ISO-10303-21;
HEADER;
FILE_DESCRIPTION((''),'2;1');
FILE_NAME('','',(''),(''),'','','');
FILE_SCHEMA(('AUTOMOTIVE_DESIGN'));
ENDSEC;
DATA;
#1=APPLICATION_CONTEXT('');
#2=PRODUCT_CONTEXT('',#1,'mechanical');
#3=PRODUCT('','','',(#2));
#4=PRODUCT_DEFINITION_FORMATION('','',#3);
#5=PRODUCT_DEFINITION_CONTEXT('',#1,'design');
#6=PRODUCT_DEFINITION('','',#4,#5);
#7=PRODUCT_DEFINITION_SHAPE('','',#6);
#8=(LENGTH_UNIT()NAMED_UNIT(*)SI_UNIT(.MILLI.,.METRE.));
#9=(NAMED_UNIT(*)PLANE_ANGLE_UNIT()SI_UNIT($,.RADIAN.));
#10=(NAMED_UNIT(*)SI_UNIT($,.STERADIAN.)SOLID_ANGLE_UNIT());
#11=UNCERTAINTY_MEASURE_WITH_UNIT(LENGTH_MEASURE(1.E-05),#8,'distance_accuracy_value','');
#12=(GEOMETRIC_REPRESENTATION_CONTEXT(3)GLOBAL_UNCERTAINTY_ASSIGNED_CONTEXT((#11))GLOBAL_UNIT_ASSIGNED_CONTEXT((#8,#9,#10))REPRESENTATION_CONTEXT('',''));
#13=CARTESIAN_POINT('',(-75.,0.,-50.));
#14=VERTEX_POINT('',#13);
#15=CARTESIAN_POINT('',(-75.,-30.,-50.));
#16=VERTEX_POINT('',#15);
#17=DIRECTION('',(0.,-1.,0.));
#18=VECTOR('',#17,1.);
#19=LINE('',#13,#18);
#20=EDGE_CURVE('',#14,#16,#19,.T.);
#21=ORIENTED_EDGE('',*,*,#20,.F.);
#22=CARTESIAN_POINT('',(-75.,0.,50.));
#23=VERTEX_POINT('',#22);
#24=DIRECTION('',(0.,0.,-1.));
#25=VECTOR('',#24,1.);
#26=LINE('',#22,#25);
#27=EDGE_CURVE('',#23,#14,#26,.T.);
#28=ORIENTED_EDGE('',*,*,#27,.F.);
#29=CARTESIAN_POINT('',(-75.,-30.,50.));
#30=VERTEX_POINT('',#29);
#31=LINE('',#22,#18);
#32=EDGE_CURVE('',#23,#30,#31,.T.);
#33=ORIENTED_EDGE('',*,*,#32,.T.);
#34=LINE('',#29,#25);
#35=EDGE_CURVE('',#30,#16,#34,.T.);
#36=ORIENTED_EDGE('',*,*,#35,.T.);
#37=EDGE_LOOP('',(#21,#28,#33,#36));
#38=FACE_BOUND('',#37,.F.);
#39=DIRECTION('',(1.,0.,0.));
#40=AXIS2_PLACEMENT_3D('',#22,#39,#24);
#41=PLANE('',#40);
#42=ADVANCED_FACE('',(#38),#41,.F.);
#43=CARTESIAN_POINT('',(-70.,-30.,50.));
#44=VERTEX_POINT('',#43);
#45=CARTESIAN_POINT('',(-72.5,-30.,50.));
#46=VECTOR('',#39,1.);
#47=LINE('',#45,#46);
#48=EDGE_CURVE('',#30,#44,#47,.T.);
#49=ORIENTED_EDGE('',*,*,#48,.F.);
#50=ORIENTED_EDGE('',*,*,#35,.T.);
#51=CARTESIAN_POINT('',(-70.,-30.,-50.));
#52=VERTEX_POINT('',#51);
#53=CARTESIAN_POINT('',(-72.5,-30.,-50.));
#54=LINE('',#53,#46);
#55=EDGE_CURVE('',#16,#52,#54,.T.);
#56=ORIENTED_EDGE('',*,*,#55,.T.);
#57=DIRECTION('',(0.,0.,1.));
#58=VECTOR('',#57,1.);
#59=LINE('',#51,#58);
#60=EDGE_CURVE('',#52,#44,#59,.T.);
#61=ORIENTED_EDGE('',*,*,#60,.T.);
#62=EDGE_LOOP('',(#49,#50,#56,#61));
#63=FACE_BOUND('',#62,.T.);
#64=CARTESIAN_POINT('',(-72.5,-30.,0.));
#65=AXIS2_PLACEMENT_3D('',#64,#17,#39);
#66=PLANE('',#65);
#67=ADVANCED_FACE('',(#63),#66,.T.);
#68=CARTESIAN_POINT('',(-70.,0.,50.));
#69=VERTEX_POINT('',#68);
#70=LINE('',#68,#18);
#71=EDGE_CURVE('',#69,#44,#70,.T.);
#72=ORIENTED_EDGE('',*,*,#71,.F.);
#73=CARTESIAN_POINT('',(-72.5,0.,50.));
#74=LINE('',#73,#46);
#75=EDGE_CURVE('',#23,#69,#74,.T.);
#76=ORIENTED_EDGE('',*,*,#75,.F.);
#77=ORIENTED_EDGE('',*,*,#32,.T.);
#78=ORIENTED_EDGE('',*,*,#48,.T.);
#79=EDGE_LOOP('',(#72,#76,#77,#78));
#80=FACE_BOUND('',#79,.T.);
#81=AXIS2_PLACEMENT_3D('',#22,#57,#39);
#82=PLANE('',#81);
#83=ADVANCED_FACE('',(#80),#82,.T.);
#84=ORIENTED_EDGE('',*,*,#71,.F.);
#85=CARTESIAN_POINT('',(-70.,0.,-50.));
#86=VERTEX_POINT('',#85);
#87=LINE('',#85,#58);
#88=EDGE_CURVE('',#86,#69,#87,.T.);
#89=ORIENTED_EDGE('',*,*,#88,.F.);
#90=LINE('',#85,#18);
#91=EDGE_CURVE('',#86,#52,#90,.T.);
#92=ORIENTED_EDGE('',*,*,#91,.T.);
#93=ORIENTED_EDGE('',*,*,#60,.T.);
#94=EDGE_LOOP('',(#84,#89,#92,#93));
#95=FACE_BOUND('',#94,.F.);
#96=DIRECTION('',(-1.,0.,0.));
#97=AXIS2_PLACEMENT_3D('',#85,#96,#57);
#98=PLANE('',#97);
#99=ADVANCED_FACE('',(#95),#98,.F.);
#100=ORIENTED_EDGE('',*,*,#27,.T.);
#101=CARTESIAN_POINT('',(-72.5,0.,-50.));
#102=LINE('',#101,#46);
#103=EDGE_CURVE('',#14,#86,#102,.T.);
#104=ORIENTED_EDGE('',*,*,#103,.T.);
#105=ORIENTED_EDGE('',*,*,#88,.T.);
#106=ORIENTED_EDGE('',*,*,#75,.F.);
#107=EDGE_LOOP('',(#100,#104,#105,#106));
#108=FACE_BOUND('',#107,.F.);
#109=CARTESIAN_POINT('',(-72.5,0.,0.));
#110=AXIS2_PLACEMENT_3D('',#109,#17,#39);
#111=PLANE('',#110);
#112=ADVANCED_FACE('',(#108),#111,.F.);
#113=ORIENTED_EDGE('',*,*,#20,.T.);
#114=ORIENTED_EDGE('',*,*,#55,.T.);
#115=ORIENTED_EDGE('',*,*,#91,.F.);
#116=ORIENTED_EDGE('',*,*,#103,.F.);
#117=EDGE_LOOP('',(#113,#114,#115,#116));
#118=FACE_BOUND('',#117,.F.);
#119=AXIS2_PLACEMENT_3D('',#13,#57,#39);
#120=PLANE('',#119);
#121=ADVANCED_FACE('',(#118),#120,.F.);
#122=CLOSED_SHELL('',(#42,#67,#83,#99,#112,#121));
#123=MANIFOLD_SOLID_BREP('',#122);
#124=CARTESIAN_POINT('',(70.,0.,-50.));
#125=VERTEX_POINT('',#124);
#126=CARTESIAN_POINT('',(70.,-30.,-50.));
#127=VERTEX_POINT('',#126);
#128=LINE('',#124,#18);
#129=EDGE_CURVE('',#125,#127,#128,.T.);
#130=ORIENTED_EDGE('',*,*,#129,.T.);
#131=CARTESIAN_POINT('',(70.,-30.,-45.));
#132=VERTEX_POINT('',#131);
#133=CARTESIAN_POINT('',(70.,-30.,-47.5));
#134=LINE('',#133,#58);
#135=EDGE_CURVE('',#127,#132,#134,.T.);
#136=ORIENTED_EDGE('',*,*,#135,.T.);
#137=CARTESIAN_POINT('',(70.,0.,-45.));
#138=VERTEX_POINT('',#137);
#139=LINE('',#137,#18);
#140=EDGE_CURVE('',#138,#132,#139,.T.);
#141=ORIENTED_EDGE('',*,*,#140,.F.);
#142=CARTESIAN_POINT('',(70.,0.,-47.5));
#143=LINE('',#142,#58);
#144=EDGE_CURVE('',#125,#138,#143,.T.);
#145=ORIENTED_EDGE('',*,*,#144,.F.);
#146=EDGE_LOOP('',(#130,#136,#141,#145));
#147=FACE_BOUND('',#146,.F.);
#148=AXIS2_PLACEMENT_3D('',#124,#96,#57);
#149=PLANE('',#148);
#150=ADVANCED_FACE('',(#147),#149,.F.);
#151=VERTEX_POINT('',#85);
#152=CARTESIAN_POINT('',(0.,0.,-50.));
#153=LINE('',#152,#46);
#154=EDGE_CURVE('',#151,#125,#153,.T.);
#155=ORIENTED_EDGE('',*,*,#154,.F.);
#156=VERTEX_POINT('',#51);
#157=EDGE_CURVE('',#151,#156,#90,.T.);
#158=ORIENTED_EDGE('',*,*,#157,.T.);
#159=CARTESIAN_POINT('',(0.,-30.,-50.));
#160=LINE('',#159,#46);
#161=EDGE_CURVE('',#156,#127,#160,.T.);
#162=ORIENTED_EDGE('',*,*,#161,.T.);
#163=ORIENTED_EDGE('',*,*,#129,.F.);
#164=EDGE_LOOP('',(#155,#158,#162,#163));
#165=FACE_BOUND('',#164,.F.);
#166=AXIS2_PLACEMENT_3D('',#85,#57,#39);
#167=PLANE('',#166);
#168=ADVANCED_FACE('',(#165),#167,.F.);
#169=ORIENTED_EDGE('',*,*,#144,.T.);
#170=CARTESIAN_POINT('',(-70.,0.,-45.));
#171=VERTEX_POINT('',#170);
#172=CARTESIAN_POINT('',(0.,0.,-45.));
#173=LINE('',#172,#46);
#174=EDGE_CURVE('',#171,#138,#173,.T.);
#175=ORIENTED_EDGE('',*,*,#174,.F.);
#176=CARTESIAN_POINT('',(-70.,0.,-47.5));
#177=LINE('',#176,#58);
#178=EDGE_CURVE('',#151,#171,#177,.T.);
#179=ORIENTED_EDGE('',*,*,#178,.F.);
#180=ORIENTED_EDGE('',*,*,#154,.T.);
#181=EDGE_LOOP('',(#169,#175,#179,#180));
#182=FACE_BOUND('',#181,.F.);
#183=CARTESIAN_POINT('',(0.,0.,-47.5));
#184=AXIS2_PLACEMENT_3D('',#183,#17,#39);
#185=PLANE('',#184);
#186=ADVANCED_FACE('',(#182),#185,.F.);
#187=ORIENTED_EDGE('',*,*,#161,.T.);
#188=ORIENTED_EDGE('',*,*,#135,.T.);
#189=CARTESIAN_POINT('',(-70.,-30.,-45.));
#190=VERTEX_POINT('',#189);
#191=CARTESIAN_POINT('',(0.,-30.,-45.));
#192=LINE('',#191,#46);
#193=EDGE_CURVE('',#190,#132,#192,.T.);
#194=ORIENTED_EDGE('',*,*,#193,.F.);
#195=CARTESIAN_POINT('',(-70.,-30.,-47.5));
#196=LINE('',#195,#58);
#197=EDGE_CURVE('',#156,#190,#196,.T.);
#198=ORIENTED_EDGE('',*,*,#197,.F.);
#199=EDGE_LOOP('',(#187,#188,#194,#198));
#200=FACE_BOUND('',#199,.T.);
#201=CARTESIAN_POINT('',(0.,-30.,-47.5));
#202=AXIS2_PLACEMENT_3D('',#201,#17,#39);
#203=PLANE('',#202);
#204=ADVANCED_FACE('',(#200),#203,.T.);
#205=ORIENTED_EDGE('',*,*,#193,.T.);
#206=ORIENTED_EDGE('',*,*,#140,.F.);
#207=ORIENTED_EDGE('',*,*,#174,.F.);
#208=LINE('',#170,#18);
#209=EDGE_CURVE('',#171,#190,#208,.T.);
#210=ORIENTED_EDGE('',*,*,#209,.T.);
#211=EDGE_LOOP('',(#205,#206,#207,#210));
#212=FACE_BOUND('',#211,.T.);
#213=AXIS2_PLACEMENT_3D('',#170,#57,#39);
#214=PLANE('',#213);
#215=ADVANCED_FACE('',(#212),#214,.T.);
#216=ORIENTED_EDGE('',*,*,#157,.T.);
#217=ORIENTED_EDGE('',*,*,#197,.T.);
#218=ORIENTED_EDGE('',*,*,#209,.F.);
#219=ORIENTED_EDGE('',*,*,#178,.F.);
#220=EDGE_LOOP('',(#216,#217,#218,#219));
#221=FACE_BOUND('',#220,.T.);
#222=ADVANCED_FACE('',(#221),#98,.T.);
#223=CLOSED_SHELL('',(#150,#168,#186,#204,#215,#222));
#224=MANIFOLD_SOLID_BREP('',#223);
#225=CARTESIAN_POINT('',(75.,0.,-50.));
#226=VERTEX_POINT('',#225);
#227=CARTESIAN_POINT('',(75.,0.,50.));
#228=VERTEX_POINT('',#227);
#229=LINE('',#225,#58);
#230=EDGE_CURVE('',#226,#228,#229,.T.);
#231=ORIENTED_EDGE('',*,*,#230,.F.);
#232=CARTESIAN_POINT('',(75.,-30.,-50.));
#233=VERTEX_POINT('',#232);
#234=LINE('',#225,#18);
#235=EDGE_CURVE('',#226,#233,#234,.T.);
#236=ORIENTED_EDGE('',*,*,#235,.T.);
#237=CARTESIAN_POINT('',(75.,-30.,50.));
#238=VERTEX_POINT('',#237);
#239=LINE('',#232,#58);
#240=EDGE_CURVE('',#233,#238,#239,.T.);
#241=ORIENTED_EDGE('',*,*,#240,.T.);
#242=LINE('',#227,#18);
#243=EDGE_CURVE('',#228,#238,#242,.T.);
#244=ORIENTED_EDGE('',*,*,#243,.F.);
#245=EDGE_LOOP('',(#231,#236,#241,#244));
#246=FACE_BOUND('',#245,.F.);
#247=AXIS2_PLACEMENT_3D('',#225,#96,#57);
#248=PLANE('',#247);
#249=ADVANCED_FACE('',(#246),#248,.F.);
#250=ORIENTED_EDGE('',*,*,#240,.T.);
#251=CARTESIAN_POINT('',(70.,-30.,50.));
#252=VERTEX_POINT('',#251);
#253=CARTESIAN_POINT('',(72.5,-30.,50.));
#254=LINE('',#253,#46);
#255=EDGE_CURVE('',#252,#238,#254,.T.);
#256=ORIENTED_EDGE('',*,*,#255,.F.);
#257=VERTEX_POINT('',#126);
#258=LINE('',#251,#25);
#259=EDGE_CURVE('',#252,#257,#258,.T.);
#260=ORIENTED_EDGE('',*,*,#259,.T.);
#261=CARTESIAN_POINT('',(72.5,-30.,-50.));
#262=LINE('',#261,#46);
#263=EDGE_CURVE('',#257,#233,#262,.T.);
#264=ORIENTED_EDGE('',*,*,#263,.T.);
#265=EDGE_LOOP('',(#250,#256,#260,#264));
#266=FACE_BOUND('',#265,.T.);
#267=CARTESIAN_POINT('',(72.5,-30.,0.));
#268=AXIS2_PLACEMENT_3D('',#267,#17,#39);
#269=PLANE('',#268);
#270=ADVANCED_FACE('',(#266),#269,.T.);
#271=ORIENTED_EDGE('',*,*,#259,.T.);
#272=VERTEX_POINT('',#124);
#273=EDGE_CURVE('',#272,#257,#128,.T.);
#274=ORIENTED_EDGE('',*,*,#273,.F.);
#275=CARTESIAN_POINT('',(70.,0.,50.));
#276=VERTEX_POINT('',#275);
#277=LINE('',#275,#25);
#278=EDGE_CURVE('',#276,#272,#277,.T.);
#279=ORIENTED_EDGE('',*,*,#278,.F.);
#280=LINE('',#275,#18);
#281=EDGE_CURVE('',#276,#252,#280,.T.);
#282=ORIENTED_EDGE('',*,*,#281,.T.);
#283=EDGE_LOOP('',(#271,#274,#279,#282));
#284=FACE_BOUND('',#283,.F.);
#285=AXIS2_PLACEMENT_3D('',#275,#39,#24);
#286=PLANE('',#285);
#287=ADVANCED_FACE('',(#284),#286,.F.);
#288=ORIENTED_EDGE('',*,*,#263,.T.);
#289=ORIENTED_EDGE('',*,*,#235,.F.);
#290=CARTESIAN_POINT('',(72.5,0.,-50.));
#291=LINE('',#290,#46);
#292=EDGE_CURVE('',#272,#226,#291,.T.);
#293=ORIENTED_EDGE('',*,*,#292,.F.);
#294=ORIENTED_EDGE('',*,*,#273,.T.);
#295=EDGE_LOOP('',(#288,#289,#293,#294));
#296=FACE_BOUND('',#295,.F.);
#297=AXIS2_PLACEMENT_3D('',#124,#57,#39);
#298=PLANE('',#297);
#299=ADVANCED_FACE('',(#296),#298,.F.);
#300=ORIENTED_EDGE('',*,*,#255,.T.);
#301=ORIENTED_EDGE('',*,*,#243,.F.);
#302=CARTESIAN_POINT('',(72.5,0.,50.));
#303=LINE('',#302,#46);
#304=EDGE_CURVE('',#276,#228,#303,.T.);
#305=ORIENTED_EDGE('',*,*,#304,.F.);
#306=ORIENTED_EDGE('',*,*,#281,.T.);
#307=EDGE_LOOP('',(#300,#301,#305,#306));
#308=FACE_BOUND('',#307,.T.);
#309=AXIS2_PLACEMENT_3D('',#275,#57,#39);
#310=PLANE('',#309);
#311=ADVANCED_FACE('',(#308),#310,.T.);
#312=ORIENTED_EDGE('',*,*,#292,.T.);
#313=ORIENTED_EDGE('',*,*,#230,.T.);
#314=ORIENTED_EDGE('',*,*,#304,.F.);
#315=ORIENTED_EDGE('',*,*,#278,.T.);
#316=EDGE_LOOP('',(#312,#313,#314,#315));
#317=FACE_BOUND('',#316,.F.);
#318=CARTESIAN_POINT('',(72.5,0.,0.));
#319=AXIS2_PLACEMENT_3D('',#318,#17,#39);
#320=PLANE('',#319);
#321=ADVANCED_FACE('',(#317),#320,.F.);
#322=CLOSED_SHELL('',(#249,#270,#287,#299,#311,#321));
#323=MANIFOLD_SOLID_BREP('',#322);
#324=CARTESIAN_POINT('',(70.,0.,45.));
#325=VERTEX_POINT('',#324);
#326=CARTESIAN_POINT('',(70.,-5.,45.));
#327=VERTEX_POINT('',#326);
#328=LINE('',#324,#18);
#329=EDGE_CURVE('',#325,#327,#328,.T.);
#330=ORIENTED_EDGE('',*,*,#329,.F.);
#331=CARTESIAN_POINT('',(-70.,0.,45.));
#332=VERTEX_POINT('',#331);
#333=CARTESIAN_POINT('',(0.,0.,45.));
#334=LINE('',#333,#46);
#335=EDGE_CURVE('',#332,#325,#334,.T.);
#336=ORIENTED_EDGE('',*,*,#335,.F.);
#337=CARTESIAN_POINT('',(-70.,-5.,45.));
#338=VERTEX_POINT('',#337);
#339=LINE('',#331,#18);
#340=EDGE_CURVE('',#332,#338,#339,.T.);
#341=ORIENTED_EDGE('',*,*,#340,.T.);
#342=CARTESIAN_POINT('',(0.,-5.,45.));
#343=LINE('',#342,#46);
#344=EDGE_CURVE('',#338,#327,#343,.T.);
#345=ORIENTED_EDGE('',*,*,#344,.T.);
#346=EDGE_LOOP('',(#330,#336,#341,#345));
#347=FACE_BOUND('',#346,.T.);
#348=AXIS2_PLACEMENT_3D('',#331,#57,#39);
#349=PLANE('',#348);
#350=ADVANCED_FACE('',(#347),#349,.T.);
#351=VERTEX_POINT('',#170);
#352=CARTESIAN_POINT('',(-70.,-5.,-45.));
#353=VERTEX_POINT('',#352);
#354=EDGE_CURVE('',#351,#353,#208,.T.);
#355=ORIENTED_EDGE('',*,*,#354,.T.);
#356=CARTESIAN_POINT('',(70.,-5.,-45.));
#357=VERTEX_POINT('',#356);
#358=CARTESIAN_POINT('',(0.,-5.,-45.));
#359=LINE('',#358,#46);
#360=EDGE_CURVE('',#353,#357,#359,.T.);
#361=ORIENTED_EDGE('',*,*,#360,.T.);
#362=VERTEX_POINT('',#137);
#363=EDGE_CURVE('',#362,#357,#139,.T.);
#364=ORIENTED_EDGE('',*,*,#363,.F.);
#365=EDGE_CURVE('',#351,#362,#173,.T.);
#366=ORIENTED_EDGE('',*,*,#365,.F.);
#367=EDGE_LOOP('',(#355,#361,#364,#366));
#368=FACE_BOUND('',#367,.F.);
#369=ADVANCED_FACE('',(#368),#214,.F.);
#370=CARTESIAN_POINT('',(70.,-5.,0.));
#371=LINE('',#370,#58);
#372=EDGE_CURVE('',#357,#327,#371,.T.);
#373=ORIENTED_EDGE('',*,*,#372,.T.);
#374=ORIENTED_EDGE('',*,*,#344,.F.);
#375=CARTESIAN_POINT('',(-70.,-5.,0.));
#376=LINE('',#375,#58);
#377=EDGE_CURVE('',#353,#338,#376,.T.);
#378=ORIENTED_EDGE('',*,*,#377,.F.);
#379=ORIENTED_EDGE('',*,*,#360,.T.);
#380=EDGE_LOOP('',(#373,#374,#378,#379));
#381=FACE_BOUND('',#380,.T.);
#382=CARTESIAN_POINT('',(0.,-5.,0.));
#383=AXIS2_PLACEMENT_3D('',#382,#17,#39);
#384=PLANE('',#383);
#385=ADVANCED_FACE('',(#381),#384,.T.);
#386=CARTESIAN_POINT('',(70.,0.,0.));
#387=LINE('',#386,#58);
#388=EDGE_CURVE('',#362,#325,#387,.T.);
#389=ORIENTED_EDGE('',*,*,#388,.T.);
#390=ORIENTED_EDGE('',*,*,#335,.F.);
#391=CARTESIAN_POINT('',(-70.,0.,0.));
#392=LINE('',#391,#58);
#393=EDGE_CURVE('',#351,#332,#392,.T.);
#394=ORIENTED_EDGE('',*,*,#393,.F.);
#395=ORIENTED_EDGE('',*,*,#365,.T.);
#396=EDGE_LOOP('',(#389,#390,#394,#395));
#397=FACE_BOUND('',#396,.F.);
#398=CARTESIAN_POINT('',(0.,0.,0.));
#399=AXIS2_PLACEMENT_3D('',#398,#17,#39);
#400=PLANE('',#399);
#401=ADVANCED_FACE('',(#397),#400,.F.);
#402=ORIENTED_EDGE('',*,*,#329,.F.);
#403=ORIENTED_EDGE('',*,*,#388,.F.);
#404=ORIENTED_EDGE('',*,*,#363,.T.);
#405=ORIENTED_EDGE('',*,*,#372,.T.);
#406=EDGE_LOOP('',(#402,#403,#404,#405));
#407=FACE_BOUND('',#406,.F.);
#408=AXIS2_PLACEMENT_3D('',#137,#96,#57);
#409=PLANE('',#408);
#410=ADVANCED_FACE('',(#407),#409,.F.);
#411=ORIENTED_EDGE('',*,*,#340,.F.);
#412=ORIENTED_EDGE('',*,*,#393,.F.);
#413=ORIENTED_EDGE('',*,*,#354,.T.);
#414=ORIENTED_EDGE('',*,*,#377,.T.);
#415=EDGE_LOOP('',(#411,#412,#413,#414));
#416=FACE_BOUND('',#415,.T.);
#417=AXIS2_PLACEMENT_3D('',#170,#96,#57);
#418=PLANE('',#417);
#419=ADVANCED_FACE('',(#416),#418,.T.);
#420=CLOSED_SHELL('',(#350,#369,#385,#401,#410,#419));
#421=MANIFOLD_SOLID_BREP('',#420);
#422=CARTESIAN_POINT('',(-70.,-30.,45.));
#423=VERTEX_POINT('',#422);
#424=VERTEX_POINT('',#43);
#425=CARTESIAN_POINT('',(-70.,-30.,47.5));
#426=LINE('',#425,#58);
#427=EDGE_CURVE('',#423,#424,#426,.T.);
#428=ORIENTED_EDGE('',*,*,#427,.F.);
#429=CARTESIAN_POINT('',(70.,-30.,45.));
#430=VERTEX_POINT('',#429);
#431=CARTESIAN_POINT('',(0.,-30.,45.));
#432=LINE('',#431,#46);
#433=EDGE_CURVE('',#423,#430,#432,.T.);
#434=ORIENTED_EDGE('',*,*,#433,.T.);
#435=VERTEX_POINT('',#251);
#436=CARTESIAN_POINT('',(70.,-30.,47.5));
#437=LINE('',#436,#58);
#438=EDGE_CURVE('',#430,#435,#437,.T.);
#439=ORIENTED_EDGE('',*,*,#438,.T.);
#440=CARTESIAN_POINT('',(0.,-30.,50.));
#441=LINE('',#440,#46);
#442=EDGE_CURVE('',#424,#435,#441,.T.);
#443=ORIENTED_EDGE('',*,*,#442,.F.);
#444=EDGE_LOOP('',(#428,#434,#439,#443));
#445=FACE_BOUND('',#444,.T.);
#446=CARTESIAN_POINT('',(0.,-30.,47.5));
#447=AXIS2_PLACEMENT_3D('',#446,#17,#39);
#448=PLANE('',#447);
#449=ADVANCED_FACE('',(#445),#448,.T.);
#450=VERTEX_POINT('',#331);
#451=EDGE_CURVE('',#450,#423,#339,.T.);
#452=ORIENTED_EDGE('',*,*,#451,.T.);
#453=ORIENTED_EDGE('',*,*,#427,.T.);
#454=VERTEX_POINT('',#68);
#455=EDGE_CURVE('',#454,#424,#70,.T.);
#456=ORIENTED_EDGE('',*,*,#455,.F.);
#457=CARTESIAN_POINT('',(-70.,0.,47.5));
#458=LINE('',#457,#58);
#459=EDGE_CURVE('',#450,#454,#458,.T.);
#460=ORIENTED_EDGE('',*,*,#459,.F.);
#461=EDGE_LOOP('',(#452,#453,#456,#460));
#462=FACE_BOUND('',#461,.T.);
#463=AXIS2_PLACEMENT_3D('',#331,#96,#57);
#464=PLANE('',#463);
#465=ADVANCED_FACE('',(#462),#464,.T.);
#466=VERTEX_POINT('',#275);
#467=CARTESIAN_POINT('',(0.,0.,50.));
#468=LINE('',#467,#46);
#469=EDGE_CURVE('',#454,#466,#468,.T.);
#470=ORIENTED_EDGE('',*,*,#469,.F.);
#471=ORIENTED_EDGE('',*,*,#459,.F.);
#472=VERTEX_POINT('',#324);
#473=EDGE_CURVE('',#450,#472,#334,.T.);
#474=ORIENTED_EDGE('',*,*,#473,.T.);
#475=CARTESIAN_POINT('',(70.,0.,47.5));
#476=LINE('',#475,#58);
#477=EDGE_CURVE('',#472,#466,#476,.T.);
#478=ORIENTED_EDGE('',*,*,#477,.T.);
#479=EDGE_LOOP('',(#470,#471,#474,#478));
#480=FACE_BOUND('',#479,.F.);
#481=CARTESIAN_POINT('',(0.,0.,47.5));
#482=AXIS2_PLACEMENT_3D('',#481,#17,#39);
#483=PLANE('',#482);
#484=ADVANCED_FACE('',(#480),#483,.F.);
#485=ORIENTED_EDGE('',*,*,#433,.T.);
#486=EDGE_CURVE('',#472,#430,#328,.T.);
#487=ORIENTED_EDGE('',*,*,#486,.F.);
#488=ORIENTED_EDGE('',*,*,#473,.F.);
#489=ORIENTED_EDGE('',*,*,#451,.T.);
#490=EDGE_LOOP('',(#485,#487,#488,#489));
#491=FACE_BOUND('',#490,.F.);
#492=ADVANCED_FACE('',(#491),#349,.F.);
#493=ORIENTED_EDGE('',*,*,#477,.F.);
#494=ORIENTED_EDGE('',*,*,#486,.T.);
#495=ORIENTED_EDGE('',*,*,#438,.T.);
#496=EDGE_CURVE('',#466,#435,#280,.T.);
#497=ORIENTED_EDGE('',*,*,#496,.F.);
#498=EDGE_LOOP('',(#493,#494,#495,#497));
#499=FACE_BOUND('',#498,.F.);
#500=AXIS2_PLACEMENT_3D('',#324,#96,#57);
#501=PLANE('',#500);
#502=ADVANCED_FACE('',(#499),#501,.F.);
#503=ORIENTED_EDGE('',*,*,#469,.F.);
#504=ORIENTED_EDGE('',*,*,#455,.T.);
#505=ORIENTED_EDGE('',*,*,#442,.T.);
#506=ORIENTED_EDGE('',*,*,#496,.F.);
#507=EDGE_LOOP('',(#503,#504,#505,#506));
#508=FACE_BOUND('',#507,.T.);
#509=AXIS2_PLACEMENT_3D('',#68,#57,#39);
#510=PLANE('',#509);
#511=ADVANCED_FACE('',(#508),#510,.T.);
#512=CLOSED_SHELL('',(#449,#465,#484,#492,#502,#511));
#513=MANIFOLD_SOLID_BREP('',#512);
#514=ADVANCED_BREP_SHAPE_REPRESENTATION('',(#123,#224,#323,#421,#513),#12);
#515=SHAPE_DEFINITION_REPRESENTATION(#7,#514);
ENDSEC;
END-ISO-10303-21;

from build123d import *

# Parameters (mm, degrees)
F0_W     = 140
F0_H     = 90
F1_DEPTH = 5
F0_W_2   = 5
F0_H_2   = 5
F2_DEPTH = 30
F3_DEPTH = 30
F4_DEPTH = 30
F5_DEPTH = 30


# Not quite as in the source:
# - a feature of the source that left no trace in its solid (it failed there, or was rolled back) is left out


with BuildPart() as f1:
    # F0 (on Front) → F1 (new body)
    with BuildSketch(Plane.XZ):
        Rectangle(F0_W, F0_H)
    extrude(amount=F1_DEPTH)


with BuildPart() as f2:
    # F0 (on Front) → F2 (new body)
    with BuildSketch(Plane.XZ):
        with Locations((-72.5, 0)):
            Rectangle(F0_W_2, F0_H)
        with Locations((-72.5, 47.5)):
            Rectangle(F0_W_2, F0_H_2)
        with Locations((-72.5, -47.5)):
            Rectangle(F0_W_2, F0_H_2)
    extrude(amount=F2_DEPTH)


with BuildPart() as f3:
    # F0 (on Front) → F3 (new body)
    with BuildSketch(Plane.XZ):
        with Locations((72.5, 0)):
            Rectangle(F0_W_2, F0_H)
        with Locations((72.5, -47.5)):
            Rectangle(F0_W_2, F0_H_2)
        with Locations((72.5, 47.5)):
            Rectangle(F0_W_2, F0_H_2)
    extrude(amount=F3_DEPTH)


with BuildPart() as f4:
    # F0 (on Front) → F4 (new body)
    with BuildSketch(Plane.XZ):
        with Locations((0, 47.5)):
            Rectangle(F0_W, F0_H_2)
    extrude(amount=F4_DEPTH)


with BuildPart() as f5:
    # F0 (on Front) → F5 (new body)
    with BuildSketch(Plane.XZ):
        with Locations((0, -47.5)):
            Rectangle(F0_W, F0_H_2)
    extrude(amount=F5_DEPTH)


solid = Compound([f1.part, f2.part, f3.part, f4.part, f5.part])
